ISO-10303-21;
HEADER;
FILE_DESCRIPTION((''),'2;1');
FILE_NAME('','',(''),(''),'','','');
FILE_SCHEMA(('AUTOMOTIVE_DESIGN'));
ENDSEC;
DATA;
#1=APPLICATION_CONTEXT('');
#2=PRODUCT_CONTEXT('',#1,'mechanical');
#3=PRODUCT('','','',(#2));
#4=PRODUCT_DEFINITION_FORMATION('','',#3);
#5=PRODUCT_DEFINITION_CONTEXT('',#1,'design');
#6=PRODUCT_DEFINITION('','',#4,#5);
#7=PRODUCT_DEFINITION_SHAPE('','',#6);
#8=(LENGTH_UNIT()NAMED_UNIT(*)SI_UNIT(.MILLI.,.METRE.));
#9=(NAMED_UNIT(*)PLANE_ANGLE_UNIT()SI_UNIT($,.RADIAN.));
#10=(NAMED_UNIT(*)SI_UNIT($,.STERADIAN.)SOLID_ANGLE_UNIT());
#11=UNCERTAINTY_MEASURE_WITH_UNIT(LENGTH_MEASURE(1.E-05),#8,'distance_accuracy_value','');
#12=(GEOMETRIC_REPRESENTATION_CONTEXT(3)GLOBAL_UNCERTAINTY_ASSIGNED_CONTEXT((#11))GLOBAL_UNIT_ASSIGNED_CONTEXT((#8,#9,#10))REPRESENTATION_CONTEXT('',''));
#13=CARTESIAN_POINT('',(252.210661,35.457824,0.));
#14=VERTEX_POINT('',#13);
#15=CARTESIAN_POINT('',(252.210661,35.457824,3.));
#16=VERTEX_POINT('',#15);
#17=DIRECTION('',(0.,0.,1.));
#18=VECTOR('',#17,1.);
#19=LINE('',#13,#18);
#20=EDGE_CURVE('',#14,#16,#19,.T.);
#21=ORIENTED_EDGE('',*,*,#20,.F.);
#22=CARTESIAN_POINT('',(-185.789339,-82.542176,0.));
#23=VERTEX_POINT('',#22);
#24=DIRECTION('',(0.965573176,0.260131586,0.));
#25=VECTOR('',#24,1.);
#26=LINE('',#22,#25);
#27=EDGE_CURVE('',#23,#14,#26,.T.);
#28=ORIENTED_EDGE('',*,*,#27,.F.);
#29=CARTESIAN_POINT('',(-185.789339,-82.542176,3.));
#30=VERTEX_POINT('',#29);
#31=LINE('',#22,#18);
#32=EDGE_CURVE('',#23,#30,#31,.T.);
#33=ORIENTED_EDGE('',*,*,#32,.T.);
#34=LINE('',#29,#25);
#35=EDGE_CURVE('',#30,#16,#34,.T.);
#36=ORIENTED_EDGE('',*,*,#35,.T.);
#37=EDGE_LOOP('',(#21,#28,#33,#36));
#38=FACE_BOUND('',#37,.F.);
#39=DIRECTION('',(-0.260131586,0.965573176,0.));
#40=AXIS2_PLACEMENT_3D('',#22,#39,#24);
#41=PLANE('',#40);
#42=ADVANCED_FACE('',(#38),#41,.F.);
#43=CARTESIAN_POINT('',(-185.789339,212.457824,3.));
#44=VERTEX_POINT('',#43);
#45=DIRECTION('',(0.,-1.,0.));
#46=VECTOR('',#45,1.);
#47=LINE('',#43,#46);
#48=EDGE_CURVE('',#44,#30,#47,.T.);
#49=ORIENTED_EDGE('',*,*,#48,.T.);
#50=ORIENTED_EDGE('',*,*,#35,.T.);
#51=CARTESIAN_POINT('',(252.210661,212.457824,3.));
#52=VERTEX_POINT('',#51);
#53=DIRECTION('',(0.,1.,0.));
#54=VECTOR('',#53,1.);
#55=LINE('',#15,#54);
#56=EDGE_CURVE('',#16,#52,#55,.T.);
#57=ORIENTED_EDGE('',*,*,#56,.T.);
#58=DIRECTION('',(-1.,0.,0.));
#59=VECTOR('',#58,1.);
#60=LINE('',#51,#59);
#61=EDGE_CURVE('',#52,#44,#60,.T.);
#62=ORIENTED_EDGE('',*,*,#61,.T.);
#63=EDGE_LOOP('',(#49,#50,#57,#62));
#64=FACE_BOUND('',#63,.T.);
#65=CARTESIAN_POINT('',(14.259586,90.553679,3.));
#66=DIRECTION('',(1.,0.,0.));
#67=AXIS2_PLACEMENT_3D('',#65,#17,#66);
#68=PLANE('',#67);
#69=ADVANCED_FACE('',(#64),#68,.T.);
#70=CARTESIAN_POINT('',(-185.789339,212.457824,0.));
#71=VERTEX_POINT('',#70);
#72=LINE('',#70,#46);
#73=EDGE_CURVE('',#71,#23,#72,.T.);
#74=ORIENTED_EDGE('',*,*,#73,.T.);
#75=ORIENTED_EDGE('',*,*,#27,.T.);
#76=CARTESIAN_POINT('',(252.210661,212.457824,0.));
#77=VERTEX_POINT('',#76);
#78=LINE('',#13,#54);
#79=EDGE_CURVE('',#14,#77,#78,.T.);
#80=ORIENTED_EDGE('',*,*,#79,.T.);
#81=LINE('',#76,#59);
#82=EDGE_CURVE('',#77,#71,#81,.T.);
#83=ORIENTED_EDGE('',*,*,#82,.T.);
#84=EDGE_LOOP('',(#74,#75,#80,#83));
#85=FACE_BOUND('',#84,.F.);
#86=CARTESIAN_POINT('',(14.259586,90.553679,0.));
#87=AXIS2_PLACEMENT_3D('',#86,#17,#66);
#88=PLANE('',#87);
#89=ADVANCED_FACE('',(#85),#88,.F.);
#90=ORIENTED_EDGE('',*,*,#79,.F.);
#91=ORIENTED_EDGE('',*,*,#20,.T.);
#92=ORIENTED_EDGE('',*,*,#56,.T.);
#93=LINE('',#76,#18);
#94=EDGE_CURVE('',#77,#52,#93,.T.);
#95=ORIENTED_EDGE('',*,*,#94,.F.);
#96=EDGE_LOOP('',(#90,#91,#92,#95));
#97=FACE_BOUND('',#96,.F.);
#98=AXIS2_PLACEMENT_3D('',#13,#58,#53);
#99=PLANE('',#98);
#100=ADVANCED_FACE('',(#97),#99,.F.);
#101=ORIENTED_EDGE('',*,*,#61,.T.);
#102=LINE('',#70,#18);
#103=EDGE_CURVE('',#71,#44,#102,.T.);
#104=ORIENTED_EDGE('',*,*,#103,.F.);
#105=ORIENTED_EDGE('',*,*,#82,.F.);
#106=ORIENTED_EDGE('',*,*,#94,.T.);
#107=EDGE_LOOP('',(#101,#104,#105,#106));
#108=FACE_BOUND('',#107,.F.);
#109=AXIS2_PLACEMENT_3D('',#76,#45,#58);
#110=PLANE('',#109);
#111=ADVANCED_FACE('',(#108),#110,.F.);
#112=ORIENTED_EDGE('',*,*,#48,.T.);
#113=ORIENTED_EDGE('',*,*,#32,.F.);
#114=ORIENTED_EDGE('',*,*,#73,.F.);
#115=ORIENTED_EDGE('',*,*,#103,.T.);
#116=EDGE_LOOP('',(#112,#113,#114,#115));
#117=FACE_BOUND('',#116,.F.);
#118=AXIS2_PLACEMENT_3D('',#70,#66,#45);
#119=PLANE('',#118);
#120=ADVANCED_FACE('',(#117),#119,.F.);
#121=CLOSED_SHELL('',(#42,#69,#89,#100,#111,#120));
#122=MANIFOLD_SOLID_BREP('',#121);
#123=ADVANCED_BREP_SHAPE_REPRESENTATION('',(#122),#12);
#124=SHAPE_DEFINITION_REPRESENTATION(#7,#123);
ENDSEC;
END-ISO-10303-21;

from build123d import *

# Parameters (mm, degrees)
F0_W     = 15
F0_H     = 3
F1_DEPTH = 3


with BuildPart() as f1:
    # F0 (on Top) → F1 (new body)
    with BuildSketch(Plane.XY):
        Polygon((252.2106605172, 212.4578239818), (-185.7893394828, 212.4578239818), (-185.7893394828, -82.5421760182), (252.2106605172, 35.4578239818), align=None)
        with Locations((-140.7893394828, 145.9578239818)):
            Rectangle(F0_W, F0_H, mode=Mode.SUBTRACT)
        with Locations((33.2106605172, 145.9578239818)):
            Rectangle(F0_W, F0_H, mode=Mode.SUBTRACT)
        with Locations((207.2106605172, 145.9578239818)):
            Rectangle(F0_W, F0_H, mode=Mode.SUBTRACT)
        with Locations((207.2106605172, 145.9578239818)):
            Rectangle(F0_W, F0_H)
        with Locations((-140.7893394828, 145.9578239818)):
            Rectangle(F0_W, F0_H)
        with Locations((33.2106605172, 145.9578239818)):
            Rectangle(F0_W, F0_H)
    extrude(amount=F1_DEPTH)


solid = f1.part
